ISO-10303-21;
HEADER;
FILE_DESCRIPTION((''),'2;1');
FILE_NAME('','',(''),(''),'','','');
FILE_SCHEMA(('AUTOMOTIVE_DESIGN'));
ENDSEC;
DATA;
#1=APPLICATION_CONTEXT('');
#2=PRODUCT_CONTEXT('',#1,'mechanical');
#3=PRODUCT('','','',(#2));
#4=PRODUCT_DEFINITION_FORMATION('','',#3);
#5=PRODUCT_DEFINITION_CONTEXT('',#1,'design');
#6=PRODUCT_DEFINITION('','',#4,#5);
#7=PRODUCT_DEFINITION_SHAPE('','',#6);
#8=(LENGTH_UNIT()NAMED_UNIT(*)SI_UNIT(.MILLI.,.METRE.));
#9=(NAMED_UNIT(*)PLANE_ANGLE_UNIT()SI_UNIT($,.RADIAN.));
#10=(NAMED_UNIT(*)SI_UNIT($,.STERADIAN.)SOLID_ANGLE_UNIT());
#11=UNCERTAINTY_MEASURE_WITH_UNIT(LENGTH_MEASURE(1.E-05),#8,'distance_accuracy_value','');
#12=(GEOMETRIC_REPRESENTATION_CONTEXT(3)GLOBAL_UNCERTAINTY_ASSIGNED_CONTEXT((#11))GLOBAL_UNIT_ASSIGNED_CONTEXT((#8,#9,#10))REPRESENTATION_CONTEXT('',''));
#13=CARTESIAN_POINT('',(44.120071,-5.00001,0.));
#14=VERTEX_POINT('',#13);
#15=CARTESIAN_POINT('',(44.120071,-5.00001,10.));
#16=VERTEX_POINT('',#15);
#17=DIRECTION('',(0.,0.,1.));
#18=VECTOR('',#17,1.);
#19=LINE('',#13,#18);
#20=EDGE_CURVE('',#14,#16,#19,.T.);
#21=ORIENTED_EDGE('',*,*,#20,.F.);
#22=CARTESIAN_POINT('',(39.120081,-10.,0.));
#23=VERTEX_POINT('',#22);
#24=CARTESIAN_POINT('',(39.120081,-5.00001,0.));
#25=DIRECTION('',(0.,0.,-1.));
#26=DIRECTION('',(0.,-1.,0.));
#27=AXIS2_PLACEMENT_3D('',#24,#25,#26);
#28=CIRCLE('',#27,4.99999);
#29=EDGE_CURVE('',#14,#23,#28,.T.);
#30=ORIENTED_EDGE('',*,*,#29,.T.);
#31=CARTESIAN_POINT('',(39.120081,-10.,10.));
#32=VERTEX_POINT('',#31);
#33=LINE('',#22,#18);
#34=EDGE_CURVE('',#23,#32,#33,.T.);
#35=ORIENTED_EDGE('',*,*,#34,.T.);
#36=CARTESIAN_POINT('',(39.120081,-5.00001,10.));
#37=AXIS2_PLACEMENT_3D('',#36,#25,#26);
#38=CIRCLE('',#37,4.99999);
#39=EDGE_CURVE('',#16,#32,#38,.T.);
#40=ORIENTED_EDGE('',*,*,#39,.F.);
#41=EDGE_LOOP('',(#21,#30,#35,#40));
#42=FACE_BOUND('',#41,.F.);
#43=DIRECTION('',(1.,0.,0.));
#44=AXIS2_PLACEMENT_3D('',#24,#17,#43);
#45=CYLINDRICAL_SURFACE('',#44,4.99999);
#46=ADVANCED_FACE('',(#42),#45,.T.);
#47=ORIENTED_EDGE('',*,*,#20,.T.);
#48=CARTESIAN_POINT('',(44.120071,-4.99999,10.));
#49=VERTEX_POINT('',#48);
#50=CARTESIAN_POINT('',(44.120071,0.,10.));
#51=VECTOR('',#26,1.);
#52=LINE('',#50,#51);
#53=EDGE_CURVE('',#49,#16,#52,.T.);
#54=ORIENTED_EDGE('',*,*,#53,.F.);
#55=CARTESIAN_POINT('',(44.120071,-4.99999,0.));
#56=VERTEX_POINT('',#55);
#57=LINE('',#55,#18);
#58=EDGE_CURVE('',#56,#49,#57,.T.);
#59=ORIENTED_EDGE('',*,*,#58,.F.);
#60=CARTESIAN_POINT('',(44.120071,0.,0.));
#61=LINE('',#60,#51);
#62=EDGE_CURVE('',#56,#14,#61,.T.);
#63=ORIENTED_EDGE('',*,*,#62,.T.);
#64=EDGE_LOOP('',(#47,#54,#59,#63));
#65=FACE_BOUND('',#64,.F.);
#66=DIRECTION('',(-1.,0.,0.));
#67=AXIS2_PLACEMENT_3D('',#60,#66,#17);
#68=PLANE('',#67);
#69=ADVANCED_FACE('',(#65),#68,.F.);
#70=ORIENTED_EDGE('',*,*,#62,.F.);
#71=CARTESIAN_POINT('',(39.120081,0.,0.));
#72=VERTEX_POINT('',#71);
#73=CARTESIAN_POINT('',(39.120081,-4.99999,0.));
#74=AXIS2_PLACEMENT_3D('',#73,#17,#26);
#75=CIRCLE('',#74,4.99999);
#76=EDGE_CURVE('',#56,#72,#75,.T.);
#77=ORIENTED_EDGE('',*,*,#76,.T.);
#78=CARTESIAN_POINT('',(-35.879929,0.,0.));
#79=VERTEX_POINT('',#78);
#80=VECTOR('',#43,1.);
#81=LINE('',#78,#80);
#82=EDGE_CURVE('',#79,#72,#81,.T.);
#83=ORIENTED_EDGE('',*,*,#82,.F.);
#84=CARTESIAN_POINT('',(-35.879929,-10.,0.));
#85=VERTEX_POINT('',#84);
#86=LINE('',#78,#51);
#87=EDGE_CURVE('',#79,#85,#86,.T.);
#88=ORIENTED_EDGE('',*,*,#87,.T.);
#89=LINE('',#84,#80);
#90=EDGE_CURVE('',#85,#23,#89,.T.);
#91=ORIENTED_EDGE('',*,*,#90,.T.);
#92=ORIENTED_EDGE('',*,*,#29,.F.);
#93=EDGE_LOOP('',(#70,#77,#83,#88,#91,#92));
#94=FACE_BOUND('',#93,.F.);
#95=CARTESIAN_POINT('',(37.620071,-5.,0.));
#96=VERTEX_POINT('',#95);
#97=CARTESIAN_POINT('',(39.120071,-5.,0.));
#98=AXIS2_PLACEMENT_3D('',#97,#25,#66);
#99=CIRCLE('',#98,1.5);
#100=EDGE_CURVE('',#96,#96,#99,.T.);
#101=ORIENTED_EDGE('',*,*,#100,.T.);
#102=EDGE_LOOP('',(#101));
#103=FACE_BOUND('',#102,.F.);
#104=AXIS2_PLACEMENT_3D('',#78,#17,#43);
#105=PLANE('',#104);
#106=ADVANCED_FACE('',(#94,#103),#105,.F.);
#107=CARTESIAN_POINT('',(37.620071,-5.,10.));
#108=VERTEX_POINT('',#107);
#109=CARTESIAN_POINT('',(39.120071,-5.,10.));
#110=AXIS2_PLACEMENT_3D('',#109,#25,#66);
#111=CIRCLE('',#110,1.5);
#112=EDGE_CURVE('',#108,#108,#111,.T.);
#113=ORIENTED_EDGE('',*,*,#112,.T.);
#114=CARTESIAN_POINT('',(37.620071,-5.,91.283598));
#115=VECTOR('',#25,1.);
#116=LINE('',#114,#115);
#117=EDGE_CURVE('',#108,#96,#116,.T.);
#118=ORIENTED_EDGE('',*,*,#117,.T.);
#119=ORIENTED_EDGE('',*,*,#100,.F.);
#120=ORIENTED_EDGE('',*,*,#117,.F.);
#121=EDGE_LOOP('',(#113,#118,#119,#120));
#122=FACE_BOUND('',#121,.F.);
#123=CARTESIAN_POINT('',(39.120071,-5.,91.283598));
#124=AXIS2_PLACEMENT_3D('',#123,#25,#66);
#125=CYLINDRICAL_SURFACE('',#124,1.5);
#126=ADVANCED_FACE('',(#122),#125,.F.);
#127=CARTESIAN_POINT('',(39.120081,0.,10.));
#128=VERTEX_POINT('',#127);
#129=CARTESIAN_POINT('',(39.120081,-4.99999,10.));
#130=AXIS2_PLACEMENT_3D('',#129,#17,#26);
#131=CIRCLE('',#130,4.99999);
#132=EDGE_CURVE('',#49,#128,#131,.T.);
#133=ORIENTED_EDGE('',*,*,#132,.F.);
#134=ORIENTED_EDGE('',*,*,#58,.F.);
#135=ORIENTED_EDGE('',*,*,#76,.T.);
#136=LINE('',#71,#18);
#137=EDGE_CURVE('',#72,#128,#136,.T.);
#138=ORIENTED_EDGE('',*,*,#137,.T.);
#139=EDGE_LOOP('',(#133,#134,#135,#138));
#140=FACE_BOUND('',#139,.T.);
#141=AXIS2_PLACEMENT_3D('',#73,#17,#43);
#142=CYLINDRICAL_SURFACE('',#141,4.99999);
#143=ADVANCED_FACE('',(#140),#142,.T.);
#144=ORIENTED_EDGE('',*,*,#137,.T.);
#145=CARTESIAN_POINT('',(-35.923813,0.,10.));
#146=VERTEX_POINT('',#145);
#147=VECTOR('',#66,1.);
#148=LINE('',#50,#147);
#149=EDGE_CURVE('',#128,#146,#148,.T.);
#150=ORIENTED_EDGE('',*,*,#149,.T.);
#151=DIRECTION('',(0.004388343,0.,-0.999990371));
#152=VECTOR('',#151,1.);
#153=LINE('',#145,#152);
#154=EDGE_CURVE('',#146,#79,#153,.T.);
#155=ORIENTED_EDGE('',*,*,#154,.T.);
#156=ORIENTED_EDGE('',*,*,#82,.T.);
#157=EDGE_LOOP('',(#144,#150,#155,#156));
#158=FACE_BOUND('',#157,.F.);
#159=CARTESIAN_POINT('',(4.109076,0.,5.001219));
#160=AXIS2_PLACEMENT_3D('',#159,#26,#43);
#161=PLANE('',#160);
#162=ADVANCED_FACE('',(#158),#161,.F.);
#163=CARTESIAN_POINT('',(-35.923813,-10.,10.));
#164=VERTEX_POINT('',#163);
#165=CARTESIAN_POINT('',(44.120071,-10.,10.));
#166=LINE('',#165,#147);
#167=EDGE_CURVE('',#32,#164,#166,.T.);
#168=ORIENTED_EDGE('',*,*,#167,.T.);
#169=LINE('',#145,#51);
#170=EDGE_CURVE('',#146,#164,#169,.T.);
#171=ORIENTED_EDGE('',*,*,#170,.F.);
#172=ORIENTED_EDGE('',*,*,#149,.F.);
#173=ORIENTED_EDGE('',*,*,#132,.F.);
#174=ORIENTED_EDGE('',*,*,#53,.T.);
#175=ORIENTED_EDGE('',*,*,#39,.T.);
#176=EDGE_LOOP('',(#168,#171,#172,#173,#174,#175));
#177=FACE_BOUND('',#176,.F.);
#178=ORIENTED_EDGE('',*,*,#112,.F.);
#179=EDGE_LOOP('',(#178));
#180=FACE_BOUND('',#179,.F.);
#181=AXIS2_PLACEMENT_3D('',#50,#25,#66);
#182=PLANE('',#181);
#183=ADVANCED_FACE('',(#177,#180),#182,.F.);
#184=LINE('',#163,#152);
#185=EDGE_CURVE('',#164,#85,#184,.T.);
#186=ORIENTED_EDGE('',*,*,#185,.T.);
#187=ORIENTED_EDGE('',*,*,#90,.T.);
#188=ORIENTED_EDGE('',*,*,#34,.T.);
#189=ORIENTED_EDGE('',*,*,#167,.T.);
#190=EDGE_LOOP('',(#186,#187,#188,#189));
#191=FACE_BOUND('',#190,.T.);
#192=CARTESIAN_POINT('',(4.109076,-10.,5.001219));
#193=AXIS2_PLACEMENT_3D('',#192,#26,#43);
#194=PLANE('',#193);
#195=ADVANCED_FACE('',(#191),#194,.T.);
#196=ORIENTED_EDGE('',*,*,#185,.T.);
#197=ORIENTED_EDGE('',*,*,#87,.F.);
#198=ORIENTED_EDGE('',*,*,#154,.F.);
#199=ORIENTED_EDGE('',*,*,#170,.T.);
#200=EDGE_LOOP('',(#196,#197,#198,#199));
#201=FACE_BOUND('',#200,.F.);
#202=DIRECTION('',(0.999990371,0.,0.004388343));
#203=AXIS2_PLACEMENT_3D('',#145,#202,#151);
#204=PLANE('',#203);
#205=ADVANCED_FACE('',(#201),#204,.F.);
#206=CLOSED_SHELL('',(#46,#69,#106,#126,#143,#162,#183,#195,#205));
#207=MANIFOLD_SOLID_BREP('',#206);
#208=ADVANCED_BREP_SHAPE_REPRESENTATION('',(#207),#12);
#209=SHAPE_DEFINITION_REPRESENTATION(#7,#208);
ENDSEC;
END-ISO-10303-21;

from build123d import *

# Parameters (mm, degrees)
F1_DEPTH = 10
F3_D     = 3
F4_R     = 4.99999


# Not quite as in the source:
# - a fillet or chamfer is up to 0.001 mm smaller than in the source, because OpenCascade refuses the exact size


with BuildPart() as f1:
    # F0 (on Front) → F1 (new body)
    with BuildSketch(Plane.XZ):
        Polygon((-25.8799286838, 0), (44.1200713162, 0), (44.1200713162, 10), (-25.9238125384, 10), (-35.9238125384, 10), (-35.8799286838, 0), align=None)
    extrude(amount=F1_DEPTH)

    # F3 (through all)
    with Locations(Plane.XY.offset(10)):
        with Locations((39.1200713162, -5)):
            Hole(F3_D / 2)

    # F4 (radius 5 in the source; OpenCascade refuses exactly that, so slightly less here)
    f4_edges = [f1.edges().sort_by_distance(p)[0] for p in [
        (44.120071, -10, 5),
        (44.120071, 0, 5),
    ]]
    fillet(f4_edges, radius=F4_R)


solid = f1.part
